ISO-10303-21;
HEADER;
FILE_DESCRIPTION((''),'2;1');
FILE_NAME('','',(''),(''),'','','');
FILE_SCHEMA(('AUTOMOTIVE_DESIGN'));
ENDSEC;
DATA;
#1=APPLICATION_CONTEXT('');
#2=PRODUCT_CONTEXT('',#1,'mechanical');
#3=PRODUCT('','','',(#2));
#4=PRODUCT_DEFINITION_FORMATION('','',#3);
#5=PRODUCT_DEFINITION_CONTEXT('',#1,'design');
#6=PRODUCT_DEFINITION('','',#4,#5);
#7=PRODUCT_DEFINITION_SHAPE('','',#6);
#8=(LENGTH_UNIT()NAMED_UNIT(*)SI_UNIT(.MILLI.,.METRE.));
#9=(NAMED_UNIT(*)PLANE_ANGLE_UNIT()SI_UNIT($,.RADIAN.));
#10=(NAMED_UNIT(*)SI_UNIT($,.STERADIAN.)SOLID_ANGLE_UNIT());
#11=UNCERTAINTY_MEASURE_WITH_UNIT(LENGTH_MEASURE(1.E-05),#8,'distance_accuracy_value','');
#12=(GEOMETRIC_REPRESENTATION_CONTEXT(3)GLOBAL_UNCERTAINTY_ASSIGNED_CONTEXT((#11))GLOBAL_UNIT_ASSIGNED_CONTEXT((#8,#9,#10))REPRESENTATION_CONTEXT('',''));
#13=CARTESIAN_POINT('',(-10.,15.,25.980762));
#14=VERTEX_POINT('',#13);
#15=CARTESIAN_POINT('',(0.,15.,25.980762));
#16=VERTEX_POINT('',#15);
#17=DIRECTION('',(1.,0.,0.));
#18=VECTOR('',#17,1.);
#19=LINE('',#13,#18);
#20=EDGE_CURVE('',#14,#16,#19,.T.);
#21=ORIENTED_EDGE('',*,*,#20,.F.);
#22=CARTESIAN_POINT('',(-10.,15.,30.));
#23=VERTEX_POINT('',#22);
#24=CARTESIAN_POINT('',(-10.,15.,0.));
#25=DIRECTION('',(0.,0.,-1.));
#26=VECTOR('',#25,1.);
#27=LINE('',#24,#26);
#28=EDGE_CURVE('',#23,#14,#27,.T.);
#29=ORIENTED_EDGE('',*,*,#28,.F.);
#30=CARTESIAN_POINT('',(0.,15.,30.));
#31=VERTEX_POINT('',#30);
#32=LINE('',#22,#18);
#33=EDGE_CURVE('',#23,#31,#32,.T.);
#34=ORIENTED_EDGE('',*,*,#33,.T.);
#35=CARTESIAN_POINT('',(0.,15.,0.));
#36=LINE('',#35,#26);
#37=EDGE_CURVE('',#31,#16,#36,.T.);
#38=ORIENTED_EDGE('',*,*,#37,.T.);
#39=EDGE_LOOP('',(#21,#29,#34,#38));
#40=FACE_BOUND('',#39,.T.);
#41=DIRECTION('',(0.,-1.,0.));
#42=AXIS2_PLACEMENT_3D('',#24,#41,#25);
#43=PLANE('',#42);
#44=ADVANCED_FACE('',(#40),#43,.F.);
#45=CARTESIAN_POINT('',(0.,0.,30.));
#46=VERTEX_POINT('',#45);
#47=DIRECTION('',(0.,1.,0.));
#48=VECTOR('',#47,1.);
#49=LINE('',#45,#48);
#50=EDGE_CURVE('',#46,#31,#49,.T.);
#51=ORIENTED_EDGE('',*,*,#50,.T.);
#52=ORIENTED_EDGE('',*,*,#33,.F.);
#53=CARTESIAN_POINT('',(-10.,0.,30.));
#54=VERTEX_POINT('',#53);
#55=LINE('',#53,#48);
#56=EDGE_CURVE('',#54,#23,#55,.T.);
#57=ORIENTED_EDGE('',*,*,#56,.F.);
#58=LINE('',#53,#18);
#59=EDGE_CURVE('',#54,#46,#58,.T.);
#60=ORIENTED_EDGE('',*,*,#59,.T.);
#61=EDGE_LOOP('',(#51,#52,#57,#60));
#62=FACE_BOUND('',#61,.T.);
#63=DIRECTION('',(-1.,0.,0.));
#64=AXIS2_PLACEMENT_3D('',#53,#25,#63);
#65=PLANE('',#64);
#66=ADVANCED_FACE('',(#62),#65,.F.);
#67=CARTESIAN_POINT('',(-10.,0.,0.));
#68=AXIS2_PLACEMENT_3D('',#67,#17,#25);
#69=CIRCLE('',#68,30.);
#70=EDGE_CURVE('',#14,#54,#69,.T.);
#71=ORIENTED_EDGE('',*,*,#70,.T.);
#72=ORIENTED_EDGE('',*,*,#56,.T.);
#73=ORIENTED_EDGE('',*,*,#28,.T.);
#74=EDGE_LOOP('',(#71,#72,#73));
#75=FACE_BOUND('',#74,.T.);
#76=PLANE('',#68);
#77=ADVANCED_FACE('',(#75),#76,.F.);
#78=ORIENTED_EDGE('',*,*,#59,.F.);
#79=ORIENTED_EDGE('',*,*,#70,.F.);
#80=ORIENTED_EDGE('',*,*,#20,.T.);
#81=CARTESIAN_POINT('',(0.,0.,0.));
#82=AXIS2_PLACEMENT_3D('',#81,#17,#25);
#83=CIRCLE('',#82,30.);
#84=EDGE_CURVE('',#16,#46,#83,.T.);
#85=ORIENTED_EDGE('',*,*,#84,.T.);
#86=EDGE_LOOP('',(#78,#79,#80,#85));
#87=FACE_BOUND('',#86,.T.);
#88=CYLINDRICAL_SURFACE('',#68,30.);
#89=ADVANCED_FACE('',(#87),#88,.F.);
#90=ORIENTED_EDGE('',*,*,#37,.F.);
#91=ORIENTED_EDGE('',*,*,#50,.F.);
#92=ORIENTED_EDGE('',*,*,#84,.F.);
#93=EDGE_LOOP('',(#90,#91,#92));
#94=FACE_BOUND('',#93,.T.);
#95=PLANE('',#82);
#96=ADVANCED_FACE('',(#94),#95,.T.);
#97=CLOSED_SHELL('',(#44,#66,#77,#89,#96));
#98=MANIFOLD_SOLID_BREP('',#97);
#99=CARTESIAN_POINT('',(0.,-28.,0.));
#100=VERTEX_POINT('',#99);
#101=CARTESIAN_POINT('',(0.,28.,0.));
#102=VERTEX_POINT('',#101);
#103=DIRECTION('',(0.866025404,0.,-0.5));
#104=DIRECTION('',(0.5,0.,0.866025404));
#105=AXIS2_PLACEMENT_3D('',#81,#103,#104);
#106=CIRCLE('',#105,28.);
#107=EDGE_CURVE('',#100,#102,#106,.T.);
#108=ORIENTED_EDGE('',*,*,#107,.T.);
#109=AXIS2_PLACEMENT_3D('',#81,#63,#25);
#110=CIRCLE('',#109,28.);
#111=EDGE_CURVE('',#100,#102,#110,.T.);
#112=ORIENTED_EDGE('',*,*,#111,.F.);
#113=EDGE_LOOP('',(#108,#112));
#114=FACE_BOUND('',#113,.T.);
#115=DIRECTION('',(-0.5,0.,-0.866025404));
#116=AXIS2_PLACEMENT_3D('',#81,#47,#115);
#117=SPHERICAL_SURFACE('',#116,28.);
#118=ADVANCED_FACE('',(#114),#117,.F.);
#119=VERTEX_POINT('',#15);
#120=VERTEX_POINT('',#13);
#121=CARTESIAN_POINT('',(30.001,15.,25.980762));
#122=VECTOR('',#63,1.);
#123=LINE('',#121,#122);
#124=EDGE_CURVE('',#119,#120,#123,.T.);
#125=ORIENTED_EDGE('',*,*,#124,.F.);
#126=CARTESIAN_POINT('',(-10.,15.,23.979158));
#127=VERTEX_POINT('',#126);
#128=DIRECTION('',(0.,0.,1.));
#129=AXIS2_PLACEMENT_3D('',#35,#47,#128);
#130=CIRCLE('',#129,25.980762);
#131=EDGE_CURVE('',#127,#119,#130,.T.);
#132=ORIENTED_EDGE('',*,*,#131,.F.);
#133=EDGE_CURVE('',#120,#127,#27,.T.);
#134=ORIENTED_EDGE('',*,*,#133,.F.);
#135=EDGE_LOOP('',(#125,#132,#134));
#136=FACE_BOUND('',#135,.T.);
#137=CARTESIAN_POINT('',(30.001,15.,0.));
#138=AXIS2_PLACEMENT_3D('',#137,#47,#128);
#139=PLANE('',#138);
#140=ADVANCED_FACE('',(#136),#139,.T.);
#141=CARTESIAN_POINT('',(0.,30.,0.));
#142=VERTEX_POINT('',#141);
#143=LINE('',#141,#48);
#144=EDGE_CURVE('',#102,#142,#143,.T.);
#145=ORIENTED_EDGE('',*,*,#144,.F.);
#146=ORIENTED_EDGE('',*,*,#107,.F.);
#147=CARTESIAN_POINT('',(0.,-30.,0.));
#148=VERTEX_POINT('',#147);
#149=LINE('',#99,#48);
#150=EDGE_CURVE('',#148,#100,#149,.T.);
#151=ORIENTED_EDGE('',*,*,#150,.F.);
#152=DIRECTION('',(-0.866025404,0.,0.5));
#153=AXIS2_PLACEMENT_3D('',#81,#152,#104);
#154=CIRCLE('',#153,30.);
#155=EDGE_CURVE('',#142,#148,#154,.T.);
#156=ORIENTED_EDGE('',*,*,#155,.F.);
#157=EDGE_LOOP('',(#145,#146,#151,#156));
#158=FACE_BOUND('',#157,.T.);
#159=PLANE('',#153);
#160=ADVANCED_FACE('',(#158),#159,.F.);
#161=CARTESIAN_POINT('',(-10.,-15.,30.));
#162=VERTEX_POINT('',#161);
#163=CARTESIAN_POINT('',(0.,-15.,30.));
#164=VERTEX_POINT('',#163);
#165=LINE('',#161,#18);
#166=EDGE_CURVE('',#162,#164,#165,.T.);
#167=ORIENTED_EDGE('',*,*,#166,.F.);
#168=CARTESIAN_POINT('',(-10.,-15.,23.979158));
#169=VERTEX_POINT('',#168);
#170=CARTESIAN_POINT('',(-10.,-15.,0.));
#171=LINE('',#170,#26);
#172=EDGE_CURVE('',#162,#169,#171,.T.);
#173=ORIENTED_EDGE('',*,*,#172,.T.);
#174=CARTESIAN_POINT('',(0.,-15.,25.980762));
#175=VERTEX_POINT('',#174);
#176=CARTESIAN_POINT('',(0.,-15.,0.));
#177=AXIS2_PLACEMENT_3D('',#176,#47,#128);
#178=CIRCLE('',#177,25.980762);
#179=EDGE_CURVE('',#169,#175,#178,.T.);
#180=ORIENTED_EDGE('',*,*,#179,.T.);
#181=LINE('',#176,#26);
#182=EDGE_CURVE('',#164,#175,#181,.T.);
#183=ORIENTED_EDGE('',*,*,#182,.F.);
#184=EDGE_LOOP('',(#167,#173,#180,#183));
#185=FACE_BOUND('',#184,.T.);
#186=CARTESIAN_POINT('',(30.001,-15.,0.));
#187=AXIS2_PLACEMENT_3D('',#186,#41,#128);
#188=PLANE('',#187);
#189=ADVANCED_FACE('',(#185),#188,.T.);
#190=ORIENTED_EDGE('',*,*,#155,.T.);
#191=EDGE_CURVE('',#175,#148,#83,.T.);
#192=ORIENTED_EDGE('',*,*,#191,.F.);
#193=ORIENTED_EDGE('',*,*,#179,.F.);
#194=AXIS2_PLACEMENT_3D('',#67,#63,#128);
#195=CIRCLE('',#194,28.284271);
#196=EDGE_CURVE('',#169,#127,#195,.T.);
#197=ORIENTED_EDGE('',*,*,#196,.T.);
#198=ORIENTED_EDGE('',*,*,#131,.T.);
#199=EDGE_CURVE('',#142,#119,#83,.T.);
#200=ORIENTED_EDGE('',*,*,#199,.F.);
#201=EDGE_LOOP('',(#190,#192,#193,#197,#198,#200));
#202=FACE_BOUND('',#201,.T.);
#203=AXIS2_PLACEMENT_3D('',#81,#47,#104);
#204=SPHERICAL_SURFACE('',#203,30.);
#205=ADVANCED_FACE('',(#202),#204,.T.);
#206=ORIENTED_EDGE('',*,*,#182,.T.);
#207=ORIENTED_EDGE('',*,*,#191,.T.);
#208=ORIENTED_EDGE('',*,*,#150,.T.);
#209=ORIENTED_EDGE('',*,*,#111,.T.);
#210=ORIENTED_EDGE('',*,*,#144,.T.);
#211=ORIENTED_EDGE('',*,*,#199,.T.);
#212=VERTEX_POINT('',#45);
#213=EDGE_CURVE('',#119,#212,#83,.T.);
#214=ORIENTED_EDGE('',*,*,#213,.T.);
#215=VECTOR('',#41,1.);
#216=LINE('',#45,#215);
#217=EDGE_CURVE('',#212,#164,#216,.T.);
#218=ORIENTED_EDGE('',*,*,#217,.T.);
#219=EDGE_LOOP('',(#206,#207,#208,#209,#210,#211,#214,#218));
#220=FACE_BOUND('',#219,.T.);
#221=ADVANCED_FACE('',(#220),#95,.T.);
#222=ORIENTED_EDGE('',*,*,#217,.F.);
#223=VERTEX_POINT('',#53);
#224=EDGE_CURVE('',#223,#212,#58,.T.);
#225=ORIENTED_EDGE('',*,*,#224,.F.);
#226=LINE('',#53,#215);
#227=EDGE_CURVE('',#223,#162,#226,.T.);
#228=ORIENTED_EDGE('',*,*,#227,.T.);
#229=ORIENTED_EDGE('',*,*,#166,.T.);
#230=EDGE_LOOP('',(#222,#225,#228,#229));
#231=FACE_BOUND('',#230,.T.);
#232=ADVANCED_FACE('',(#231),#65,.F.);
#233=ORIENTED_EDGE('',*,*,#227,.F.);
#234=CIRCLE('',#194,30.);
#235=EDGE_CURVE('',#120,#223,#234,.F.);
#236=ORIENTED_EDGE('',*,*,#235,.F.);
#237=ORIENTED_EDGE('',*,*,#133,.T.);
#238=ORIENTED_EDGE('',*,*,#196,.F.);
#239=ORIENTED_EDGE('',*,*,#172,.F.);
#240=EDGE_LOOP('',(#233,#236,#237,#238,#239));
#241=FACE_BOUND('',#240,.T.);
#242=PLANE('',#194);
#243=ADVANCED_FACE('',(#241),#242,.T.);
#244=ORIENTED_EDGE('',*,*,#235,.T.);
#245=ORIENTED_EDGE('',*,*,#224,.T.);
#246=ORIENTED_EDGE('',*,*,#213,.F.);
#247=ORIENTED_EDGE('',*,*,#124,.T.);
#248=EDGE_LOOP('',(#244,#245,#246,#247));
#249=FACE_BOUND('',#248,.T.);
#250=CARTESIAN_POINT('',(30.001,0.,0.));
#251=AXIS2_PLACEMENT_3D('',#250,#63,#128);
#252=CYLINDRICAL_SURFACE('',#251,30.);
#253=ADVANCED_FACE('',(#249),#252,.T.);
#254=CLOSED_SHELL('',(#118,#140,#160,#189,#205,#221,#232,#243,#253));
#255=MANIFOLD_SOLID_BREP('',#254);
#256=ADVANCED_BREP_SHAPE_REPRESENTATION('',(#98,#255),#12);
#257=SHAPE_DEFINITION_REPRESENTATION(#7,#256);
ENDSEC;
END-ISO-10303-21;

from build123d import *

# Parameters (mm, degrees)
REVOLVE1_ANGLE      = 150
BOSS_EXTRUDE1_DEPTH = 10
BOSS_EXTRUDE2_START = -10
BOSS_EXTRUDE2_DEPTH = 10


with BuildPart() as part:
    # Sketch1 → Revolve1 (revolve)
    with BuildSketch(Plane.YZ):
        with BuildLine():
            Line((-28, 0), (-30, 0))
            ThreePointArc((-30, 0), (0, 30), (30, 0))
            Line((30, 0), (28, 0))
            ThreePointArc((28, 0), (0, 28), (-28, 0))
        make_face()
    revolve(axis=Axis((0, -28, 0), (0, -1, 0)), revolution_arc=REVOLVE1_ANGLE)

    # Boss-Extrude2: read off the stored shape, not the designer's step
    # Boss-Extrude2 outline → Boss-Extrude2 (add)
    with BuildSketch(Plane(origin=(-10, 0, 0), x_dir=(0, -1, 0), z_dir=(-1, 0, 0)).offset(BOSS_EXTRUDE2_START)):
        with BuildLine():
            Line((-15, 25.980762114), (-15, 23.979157617))
            ThreePointArc((-15, 23.979157617), (-7.802788017, 27.186697099), (0, 28.284271247))
            Line((0, 28.284271247), (0, 30))
            ThreePointArc((0, 30), (-7.764571353, 28.977774789), (-15, 25.980762114))
        make_face()
    boss_extrude2 = extrude(amount=BOSS_EXTRUDE2_DEPTH)


with BuildPart() as body_2:
    # Sketch2 → Boss-Extrude1 (new body)
    with BuildSketch(Plane.YZ):
        with BuildLine():
            Line((15, 30), (0, 30))
            ThreePointArc((0, 30), (7.764571353, 28.977774789), (15, 25.980762114))
            Line((15, 25.980762114), (15, 30))
        make_face()
    boss_extrude1 = extrude(amount=-BOSS_EXTRUDE1_DEPTH)


with BuildPart() as part_1:
    add(part.part)

    # Mirror1: Boss-Extrude1, Boss-Extrude2 across plane
    add(boss_extrude1.mirror(Plane(origin=(30.001, 0, 0), x_dir=(0, 0, 1), z_dir=(0, 1, 0))))
    add(boss_extrude2.mirror(Plane(origin=(30.001, 0, 0), x_dir=(0, 0, 1), z_dir=(0, 1, 0))))


solid = Compound([body_2.part, part_1.part])
